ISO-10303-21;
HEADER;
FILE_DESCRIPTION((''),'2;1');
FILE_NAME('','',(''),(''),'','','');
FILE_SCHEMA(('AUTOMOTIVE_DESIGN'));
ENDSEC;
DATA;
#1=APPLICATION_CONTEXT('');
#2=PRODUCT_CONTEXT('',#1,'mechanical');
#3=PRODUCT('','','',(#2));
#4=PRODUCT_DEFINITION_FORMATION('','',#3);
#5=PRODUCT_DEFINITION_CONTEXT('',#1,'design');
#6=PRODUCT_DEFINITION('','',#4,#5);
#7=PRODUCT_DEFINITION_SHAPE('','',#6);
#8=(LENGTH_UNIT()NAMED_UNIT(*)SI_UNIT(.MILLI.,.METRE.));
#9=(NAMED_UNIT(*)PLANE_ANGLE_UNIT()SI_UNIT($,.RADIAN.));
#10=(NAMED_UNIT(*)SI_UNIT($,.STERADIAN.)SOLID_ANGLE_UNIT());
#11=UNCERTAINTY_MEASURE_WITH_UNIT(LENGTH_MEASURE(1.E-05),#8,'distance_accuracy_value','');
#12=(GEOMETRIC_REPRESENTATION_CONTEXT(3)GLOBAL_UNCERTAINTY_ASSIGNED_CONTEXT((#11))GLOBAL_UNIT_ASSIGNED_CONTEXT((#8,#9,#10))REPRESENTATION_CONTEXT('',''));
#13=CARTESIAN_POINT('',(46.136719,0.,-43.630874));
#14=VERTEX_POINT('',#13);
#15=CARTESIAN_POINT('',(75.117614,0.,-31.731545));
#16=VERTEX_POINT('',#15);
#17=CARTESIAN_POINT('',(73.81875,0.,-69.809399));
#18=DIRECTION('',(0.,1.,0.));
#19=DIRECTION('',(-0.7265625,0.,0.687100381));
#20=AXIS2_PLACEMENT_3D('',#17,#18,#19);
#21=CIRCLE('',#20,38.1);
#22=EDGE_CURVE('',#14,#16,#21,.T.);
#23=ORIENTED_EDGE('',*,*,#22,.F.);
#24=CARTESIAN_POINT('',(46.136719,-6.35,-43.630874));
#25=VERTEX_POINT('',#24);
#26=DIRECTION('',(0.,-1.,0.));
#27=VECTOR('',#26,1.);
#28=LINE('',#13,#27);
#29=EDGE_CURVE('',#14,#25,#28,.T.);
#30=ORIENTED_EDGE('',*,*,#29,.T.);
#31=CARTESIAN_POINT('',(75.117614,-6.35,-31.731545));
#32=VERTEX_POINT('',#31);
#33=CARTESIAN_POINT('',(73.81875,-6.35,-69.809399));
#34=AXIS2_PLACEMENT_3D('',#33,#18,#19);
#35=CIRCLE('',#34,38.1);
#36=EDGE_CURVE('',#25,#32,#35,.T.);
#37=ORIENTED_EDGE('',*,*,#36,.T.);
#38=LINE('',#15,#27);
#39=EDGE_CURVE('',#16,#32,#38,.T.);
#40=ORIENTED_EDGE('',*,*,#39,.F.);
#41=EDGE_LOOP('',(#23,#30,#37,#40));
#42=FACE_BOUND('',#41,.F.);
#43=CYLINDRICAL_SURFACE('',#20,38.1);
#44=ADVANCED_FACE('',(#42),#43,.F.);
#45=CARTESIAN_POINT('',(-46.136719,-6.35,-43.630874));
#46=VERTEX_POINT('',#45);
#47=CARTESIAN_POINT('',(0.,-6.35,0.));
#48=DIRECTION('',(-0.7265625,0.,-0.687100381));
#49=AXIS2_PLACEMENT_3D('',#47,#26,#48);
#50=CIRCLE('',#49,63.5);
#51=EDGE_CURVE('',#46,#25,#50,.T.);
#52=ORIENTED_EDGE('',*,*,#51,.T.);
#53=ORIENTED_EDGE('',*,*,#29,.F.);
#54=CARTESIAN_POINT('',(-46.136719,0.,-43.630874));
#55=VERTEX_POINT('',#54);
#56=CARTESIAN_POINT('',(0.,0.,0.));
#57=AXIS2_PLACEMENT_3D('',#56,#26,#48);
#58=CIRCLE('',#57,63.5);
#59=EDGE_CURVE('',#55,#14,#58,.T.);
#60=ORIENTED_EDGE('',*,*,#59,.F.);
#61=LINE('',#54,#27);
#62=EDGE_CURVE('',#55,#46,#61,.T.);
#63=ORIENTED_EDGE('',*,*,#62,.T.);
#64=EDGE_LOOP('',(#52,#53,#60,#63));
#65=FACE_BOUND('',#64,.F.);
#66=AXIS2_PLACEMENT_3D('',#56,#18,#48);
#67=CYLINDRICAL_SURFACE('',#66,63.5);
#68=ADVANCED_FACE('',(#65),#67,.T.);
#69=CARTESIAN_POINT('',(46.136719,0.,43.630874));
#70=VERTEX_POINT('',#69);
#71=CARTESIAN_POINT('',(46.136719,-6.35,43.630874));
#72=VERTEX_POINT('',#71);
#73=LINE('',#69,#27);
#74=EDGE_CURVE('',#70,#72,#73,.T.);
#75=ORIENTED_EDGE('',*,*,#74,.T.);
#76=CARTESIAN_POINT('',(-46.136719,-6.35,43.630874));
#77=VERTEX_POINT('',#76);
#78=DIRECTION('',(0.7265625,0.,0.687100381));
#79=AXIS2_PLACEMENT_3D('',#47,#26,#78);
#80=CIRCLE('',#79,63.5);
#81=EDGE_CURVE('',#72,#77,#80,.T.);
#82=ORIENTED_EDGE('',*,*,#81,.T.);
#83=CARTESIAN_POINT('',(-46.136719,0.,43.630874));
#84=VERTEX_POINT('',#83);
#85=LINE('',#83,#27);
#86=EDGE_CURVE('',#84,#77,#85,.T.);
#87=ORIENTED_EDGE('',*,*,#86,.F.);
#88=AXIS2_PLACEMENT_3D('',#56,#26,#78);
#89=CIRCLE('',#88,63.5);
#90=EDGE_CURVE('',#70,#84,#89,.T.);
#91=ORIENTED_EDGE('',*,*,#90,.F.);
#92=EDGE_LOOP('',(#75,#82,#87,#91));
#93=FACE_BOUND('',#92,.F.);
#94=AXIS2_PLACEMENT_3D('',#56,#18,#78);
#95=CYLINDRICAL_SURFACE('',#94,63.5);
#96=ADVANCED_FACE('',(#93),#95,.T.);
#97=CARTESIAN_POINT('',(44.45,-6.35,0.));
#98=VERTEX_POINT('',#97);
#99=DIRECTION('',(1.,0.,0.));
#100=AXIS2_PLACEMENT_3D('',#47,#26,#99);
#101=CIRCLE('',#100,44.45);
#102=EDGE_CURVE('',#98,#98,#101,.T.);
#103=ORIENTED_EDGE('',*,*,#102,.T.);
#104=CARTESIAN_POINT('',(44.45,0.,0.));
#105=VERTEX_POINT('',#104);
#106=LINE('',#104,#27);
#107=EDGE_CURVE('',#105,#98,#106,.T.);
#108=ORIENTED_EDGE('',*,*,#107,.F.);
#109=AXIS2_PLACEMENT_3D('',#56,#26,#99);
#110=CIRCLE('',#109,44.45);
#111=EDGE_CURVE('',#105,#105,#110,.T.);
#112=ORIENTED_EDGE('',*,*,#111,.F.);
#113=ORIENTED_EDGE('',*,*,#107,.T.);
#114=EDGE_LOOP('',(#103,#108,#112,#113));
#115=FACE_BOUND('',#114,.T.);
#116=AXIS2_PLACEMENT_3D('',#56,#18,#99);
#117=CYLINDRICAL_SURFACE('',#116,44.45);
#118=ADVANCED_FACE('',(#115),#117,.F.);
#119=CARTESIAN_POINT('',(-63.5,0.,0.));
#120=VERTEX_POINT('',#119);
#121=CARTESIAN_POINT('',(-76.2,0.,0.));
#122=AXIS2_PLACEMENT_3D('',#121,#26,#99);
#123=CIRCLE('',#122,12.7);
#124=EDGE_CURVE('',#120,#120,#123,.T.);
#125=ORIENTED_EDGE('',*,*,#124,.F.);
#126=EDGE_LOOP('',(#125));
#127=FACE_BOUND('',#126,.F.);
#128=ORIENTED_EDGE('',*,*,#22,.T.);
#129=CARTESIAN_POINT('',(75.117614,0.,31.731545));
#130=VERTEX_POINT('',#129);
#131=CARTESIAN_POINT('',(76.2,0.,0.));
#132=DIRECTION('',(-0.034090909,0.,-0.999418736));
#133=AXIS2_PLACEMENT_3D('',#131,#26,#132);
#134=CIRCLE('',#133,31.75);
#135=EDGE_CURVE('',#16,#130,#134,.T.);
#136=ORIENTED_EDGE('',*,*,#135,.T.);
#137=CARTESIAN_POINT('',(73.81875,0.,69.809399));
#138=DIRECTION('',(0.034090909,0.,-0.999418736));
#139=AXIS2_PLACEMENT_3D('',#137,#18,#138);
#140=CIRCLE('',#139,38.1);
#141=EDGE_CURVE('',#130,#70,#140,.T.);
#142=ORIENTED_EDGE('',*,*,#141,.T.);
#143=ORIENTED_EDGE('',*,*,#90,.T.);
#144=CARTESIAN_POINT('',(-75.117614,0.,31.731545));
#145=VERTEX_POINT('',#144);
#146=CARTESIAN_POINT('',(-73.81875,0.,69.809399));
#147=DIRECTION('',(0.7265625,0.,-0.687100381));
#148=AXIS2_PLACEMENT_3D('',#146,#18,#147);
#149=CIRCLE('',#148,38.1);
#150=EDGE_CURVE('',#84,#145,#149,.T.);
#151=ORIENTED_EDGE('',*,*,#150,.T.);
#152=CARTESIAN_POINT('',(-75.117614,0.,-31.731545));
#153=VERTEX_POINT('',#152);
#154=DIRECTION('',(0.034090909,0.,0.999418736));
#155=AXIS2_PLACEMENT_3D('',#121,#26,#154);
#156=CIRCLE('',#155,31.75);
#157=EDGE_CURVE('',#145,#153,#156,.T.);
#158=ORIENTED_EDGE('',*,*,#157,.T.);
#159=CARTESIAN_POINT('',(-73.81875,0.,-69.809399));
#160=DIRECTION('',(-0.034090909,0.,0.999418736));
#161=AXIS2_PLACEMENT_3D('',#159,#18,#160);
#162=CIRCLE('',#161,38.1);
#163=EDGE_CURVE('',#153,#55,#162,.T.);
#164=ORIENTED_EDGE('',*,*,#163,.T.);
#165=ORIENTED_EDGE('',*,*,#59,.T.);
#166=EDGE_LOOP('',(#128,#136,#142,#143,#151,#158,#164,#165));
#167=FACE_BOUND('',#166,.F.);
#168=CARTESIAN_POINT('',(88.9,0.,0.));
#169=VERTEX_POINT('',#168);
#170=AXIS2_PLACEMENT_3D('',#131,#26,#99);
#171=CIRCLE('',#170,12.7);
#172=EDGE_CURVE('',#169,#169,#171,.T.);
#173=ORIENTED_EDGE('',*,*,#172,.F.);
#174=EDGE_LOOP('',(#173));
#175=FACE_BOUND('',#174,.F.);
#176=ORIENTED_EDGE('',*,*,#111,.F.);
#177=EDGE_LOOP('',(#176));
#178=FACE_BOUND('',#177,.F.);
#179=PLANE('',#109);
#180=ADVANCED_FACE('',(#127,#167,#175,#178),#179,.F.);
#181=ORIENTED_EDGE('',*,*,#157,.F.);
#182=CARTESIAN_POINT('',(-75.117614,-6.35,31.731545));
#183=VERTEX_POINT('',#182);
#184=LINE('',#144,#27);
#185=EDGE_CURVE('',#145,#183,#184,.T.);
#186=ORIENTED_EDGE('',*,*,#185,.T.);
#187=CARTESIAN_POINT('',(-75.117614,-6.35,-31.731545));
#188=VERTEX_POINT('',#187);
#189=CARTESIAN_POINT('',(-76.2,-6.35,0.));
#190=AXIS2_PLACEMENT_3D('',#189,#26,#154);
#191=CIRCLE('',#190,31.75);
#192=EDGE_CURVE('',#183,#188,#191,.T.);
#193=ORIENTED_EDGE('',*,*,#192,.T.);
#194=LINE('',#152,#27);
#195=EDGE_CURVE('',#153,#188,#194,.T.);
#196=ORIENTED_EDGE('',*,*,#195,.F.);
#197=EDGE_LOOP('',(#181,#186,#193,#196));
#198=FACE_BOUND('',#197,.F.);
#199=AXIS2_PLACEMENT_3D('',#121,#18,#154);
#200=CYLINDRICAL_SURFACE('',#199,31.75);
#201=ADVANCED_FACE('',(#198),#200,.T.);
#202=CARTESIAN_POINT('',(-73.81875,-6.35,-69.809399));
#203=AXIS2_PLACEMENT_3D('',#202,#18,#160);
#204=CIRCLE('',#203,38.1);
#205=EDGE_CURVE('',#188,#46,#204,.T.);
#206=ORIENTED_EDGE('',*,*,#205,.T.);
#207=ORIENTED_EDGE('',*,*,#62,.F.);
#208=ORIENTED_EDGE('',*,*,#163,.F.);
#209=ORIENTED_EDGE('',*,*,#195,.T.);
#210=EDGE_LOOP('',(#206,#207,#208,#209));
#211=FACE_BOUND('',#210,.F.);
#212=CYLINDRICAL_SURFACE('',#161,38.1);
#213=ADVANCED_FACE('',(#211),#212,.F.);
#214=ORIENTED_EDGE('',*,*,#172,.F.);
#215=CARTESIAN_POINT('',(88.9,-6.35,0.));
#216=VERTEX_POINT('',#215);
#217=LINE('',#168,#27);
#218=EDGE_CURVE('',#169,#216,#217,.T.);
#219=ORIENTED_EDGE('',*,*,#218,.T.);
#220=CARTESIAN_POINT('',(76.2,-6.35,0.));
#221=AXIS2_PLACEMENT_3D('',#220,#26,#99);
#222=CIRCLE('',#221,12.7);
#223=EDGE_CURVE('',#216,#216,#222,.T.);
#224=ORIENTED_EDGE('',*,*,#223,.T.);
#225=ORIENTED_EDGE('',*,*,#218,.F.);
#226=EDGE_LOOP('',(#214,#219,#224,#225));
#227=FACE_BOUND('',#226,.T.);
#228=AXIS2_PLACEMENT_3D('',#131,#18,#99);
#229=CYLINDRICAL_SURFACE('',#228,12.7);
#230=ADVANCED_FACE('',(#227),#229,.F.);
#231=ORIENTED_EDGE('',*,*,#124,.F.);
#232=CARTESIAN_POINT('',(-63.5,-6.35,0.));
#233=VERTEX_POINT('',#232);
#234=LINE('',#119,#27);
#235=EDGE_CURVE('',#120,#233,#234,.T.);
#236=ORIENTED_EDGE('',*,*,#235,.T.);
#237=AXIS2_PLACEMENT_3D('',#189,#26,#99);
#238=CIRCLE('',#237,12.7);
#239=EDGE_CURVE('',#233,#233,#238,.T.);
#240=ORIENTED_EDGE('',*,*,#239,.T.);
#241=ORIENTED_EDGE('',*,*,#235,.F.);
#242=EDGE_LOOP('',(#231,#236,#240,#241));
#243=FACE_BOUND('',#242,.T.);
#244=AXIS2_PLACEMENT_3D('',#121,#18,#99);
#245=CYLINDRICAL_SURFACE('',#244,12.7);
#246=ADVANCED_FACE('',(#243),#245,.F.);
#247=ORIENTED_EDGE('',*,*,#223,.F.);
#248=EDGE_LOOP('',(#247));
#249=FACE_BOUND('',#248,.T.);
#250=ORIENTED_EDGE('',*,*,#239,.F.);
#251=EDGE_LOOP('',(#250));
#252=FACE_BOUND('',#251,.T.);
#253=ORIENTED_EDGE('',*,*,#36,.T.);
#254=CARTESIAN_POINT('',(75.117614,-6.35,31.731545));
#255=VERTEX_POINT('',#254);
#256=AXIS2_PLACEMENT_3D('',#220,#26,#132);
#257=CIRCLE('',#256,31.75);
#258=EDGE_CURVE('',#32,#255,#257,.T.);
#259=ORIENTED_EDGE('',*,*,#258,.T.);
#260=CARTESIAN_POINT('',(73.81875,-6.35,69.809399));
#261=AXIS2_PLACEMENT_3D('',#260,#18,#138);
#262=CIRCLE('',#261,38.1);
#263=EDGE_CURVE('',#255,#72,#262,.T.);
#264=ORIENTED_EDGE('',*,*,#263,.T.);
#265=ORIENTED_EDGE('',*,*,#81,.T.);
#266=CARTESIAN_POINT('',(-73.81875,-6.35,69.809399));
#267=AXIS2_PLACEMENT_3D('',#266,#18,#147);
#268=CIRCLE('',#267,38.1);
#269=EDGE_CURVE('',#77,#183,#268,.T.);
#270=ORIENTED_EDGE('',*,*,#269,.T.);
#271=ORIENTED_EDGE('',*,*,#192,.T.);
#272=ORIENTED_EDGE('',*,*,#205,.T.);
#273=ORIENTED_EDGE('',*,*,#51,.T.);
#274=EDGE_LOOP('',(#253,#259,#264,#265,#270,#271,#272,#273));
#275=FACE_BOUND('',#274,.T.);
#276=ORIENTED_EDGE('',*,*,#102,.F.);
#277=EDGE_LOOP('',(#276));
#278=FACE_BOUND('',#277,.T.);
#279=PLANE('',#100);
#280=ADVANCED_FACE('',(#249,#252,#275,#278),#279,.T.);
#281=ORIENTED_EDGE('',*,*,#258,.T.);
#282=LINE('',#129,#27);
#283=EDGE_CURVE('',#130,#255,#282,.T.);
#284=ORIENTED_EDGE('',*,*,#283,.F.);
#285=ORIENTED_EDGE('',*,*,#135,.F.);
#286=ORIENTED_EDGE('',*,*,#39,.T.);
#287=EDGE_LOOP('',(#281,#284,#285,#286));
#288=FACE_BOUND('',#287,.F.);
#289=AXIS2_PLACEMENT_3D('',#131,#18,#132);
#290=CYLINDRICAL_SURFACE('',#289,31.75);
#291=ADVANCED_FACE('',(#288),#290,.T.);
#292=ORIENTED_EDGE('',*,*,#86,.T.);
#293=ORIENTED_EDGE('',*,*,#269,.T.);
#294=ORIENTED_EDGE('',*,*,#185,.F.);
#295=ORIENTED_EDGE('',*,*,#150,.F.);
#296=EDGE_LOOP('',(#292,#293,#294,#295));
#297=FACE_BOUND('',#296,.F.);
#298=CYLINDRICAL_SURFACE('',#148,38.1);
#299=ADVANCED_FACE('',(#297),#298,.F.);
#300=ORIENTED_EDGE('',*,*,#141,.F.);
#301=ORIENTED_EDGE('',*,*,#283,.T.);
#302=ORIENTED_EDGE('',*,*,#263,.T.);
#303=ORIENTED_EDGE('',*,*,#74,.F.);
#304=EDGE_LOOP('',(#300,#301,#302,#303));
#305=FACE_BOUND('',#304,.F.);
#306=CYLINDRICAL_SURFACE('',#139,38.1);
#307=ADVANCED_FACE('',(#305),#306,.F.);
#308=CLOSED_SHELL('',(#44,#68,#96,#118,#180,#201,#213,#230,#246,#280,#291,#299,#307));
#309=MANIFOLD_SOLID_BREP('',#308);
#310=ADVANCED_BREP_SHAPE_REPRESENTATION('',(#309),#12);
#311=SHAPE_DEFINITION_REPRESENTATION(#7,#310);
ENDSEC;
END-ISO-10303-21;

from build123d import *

# Parameters (mm, degrees)
F0_R     = 12.7
F0_R_2   = 44.45
F1_DEPTH = 6.35


# Not quite as in the source:
# - a length typed as a fraction of an inch, garbled in the dataset ("3 / 203.2 mm" for 3/8 in), is restored


with BuildPart() as f1:
    # F0 (on Front) → F1 (new body)
    with BuildSketch(Plane.XZ):
        with BuildLine():
            ThreePointArc((-75.1176136364, -31.7315448688), (-59.3475236203, -34.5646316236), (-46.13671875, -43.6308741946))
            ThreePointArc((-46.13671875, -43.6308741946), (0, -63.5), (46.13671875, -43.6308741946))
            ThreePointArc((46.13671875, -43.6308741946), (59.3475236203, -34.5646316236), (75.1176136364, -31.7315448688))
            ThreePointArc((75.1176136364, -31.7315448688), (107.95, 0), (75.1176136364, 31.7315448688))
            ThreePointArc((75.1176136364, 31.7315448688), (59.3475236203, 34.5646316236), (46.13671875, 43.6308741946))
            ThreePointArc((46.13671875, 43.6308741946), (0, 63.5), (-46.13671875, 43.6308741946))
            ThreePointArc((-46.13671875, 43.6308741946), (-59.3475236203, 34.5646316236), (-75.1176136364, 31.7315448688))
            ThreePointArc((-75.1176136364, 31.7315448688), (-107.95, 0), (-75.1176136364, -31.7315448688))
        make_face()
        with Locations((-76.2, 0)):
            Circle(F0_R, mode=Mode.SUBTRACT)
        Circle(F0_R_2, mode=Mode.SUBTRACT)
        with Locations((76.2, 0)):
            Circle(F0_R, mode=Mode.SUBTRACT)
    extrude(amount=F1_DEPTH)


solid = f1.part
